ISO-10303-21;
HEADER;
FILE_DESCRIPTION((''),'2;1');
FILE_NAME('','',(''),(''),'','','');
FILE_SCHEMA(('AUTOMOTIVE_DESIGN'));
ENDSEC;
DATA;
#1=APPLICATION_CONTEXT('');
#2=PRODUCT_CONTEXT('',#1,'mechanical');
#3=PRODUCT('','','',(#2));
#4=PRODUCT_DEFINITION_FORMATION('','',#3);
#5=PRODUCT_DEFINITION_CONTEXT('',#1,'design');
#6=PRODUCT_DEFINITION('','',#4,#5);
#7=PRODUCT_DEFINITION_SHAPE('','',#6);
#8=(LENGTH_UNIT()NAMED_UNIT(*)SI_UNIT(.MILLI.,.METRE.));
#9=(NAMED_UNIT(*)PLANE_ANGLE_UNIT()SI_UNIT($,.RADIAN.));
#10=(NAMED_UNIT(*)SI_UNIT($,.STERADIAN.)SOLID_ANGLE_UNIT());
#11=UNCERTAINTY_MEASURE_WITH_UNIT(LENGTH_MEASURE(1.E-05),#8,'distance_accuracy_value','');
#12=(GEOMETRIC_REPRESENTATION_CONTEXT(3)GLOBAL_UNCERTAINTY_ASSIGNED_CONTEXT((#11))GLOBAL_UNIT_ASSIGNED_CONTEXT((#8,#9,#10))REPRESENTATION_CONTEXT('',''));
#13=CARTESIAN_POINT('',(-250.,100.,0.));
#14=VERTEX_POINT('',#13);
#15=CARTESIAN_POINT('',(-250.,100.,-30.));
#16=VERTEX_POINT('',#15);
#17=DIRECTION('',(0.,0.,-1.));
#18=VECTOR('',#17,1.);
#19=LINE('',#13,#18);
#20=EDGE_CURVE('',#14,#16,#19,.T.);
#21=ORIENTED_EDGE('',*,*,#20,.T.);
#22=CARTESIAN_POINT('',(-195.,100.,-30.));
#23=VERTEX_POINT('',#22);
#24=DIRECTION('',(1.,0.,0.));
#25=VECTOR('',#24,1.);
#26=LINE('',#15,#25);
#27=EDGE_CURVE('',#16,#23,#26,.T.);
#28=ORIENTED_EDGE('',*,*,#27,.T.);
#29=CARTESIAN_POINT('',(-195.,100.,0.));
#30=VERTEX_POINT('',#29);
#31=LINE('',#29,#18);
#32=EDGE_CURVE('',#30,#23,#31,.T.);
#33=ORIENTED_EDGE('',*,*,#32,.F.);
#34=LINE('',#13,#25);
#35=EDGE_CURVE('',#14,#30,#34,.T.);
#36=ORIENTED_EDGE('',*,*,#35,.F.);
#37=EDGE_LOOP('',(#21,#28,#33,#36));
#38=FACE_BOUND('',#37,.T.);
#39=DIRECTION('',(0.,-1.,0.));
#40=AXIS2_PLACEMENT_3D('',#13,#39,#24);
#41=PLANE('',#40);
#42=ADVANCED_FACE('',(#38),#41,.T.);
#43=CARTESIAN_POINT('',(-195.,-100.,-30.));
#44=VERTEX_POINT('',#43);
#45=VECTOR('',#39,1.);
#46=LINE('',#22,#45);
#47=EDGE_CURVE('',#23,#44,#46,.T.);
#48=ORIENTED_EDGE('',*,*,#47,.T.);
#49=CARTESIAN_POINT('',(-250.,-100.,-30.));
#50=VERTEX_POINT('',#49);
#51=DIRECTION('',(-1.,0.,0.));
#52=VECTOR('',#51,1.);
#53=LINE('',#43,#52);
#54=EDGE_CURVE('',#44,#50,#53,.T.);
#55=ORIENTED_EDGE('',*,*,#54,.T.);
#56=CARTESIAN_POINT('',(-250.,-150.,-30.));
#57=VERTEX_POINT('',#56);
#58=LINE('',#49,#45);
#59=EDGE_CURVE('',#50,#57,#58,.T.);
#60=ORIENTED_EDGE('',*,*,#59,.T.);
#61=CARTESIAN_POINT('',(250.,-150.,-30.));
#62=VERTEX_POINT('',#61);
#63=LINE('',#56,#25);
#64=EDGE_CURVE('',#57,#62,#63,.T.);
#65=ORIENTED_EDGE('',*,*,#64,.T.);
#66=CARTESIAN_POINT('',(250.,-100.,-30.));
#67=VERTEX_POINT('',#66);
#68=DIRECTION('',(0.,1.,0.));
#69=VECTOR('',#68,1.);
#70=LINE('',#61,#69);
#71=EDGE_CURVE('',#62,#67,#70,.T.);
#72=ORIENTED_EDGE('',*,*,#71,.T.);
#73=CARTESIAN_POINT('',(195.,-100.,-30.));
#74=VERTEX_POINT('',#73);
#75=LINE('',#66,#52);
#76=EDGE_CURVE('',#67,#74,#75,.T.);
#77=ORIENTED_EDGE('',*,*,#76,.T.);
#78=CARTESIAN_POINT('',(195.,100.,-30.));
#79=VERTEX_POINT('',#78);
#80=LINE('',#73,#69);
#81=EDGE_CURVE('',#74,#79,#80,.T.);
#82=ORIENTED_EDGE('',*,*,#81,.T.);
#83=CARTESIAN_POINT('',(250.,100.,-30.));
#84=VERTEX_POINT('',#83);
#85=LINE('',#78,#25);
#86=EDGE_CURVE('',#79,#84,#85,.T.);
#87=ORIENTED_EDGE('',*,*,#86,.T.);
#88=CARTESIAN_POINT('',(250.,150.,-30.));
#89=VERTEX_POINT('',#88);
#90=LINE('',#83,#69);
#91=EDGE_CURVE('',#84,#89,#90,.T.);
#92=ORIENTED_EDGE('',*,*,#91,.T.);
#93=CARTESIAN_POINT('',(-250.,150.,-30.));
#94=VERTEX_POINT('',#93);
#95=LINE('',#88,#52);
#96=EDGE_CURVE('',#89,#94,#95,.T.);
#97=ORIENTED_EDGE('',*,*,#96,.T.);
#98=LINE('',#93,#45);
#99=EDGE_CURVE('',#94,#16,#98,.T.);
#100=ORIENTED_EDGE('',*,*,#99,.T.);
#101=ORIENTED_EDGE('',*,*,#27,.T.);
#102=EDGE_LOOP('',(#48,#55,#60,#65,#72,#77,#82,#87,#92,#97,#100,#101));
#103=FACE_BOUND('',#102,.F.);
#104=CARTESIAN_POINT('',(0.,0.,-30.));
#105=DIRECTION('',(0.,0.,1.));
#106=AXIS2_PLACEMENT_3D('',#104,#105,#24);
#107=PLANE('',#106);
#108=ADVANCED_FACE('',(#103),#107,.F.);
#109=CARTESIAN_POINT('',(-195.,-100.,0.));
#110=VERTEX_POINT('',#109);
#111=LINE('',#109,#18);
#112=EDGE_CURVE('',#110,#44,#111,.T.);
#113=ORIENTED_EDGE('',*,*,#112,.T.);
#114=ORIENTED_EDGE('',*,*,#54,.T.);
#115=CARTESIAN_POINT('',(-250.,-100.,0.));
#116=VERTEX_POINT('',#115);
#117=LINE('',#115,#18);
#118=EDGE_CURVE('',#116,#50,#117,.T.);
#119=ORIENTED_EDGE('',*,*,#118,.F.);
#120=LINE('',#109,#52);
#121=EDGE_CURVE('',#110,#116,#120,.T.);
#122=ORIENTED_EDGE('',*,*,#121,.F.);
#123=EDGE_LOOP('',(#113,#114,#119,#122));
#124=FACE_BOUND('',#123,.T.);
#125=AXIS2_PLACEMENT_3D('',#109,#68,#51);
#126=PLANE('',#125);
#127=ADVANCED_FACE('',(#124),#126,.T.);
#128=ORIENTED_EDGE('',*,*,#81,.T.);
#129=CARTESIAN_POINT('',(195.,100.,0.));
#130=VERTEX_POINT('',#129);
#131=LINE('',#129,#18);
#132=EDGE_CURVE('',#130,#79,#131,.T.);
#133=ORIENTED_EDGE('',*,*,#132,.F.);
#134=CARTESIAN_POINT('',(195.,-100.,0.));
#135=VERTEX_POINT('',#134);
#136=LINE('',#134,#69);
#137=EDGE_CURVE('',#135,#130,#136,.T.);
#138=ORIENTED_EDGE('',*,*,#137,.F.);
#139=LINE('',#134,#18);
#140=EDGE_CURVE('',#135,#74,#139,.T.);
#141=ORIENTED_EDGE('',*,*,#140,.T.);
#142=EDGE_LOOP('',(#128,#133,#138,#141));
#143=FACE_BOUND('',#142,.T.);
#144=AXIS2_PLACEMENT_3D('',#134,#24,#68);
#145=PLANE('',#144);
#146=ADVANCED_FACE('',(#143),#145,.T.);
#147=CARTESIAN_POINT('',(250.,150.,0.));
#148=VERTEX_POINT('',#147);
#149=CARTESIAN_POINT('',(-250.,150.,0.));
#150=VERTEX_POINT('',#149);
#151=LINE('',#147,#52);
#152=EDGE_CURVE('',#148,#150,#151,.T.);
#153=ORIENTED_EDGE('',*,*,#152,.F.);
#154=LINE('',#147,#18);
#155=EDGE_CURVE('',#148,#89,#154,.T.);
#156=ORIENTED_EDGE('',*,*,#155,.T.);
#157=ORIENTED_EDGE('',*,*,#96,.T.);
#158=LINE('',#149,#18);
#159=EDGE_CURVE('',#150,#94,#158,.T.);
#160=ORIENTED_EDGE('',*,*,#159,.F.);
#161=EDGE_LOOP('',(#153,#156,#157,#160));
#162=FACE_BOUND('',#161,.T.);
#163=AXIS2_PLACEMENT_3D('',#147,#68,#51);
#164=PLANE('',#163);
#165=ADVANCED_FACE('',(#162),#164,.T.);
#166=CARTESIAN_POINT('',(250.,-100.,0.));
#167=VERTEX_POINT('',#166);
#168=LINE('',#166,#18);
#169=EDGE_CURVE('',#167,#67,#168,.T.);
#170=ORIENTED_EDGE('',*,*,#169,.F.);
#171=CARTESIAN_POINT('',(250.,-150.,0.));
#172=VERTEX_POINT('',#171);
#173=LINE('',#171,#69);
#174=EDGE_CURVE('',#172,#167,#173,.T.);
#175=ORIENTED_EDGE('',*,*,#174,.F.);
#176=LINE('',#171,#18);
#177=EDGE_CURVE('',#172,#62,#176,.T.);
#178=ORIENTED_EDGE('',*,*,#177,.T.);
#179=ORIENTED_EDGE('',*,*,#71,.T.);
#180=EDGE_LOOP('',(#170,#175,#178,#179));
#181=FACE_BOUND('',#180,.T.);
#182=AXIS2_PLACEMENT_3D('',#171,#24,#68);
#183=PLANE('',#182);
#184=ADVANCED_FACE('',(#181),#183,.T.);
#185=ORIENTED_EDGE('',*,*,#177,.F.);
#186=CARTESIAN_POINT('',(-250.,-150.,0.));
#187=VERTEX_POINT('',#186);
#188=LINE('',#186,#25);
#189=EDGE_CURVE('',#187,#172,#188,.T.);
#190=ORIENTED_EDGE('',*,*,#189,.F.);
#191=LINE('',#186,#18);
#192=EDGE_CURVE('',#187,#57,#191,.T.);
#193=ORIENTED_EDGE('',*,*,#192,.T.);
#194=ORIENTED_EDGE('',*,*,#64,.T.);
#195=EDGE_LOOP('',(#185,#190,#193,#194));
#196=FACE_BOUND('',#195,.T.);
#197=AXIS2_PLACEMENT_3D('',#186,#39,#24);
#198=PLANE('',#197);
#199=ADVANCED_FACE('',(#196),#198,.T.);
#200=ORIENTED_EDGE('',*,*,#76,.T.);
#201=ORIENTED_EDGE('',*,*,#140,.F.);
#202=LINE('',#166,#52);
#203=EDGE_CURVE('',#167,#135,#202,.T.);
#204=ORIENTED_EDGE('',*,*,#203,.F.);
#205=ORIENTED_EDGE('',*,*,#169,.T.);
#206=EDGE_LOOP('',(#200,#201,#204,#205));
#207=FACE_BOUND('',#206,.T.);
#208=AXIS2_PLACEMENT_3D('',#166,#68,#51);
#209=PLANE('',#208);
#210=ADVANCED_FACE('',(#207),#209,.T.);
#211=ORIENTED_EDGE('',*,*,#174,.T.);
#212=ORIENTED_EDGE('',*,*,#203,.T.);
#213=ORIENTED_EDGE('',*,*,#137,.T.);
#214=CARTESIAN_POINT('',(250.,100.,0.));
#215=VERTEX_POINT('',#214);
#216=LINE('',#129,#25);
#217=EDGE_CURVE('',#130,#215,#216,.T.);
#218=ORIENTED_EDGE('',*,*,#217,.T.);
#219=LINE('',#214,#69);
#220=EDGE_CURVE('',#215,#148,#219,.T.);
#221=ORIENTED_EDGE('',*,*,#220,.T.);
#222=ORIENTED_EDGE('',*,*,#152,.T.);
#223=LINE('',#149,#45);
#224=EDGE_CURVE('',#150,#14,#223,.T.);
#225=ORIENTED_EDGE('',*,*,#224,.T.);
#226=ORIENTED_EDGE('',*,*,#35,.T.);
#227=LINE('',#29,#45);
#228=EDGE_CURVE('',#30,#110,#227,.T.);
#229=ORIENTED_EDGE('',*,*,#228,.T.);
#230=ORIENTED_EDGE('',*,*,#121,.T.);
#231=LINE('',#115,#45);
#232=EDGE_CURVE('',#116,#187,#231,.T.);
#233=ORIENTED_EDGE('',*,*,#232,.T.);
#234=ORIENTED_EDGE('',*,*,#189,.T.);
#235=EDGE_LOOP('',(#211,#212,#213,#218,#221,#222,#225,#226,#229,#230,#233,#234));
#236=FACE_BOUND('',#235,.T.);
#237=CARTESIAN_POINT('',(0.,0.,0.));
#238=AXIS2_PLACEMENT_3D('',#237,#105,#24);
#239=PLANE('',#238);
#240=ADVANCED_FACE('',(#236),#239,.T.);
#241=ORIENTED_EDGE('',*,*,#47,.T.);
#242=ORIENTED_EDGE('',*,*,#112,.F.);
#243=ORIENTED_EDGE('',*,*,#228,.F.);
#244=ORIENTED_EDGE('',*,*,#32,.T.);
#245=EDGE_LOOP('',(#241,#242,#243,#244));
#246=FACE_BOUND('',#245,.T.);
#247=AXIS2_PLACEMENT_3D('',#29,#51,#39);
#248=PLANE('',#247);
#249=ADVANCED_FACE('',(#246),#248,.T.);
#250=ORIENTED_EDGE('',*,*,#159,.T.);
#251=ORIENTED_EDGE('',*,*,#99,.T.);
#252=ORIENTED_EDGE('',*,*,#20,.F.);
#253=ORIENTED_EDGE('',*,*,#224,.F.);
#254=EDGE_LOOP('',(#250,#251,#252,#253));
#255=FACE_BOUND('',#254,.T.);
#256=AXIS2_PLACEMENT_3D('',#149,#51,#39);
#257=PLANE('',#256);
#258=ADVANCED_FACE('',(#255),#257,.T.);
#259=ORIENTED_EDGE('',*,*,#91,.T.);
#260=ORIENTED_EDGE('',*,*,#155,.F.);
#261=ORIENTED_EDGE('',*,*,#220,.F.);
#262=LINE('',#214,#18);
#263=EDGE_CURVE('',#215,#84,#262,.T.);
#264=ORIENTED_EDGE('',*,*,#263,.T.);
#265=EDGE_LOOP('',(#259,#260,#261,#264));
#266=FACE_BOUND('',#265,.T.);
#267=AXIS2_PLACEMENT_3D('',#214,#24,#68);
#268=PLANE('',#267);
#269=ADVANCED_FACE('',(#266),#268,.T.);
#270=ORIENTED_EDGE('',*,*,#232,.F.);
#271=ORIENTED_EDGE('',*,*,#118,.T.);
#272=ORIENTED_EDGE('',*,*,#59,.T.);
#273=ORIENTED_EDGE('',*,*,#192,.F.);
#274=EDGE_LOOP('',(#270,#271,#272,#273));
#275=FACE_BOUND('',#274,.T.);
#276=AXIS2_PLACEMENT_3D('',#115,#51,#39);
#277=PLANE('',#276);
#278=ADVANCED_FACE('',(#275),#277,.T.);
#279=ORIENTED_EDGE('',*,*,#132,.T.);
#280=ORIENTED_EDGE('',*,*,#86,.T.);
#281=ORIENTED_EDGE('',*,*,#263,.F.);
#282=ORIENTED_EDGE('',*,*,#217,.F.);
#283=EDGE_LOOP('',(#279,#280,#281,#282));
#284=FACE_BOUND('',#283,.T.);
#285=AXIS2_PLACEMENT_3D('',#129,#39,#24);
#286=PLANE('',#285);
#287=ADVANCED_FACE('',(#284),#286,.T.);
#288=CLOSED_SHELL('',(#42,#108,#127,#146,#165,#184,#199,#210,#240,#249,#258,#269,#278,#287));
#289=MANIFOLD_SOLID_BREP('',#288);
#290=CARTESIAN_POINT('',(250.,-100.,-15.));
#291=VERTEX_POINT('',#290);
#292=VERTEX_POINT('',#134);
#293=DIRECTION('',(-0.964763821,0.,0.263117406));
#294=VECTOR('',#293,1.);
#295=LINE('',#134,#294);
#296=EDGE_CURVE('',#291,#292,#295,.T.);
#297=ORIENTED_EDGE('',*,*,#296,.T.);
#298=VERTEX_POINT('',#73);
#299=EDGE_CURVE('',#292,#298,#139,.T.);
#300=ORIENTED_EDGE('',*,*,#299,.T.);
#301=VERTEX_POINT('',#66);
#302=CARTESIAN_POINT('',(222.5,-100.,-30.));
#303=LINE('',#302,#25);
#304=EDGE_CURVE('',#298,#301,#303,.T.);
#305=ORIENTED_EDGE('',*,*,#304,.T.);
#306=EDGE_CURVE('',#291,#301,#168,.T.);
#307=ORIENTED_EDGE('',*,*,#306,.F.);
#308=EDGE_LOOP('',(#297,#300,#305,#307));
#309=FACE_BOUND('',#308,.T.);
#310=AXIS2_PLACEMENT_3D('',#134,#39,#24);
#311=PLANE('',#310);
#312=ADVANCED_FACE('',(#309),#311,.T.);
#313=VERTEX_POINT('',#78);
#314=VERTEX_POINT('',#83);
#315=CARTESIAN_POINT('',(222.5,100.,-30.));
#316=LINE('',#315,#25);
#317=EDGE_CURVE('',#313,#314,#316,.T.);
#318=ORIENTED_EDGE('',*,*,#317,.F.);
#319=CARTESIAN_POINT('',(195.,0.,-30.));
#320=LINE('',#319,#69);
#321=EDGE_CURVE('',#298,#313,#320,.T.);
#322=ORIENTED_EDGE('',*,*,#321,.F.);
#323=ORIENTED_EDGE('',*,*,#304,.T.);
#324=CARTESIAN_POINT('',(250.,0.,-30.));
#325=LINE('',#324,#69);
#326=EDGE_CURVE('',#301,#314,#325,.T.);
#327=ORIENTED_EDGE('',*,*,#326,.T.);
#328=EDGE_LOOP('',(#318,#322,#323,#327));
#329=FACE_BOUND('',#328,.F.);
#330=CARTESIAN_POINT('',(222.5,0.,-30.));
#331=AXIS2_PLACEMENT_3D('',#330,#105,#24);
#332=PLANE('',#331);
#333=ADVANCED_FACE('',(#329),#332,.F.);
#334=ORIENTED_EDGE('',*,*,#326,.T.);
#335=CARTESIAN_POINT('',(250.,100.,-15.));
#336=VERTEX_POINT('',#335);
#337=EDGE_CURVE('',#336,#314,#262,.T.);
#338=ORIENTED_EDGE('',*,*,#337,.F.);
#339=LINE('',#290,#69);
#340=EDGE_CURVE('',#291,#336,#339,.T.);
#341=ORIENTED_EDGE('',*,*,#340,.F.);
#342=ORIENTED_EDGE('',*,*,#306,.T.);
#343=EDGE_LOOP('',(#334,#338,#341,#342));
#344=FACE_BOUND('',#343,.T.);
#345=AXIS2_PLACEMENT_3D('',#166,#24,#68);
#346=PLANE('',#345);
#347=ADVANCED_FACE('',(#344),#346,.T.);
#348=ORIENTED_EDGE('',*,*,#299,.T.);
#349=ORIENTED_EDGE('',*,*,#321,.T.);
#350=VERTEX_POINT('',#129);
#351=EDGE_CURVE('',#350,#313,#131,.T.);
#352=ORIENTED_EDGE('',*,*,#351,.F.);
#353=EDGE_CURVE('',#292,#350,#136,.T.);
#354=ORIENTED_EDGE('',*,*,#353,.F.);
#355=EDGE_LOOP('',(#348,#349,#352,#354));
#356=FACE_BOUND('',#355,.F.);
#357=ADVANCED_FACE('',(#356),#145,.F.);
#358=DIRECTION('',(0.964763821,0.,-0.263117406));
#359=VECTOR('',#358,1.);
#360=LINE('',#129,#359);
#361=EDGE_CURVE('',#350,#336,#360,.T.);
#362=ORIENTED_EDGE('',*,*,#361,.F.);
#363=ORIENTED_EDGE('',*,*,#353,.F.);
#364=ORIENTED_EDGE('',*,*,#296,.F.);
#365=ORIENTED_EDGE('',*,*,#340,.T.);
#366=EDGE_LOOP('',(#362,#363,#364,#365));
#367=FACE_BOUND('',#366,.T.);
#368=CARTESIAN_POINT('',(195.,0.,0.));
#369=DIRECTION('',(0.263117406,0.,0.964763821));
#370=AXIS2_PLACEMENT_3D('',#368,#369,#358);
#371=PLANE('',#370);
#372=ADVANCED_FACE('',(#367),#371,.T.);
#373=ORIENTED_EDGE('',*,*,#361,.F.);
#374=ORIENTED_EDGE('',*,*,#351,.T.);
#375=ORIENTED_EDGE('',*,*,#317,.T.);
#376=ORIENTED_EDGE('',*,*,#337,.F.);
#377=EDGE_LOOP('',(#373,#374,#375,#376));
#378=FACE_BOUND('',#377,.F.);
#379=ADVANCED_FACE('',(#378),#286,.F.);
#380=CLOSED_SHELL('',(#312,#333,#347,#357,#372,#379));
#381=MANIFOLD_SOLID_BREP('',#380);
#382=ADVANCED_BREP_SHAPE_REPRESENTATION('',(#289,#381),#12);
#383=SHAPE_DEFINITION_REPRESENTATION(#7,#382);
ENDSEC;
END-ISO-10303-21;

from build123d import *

# Parameters (mm, degrees)
F2_DEPTH      = 30
F0_W          = 55
F0_H          = 200
F3_DEPTH      = 30
F4_DEPTH      = 150.001
F4_DEPTH_BACK = 150.001


# Not quite as in the source:
# - a feature of the source that left no trace in its solid (it failed there, or was rolled back) is left out


with BuildPart() as f2:
    # F0 (on Top) → F2 (new body)
    with BuildSketch(Plane.XY):
        Polygon((250, 150), (-250, 150), (-250, 100), (-195, 100), (-195, -100), (-250, -100), (-250, -150), (250, -150), (250, -100), (195, -100), (195, 100), (250, 100), align=None)
    extrude(amount=-F2_DEPTH)


with BuildPart() as f3:
    # F0 (on Top) → F3 (new body, through all)
    with BuildSketch(Plane.XY):
        with Locations((222.5, 0)):
            Rectangle(F0_W, F0_H)
    extrude(amount=-F3_DEPTH)

    # F1 (on Front) → F4 (cut, two sides)
    with BuildSketch(Plane.XZ) as f4_sk:
        Polygon((250, -15), (250, 0), (195, 0), align=None)
    extrude(amount=-F4_DEPTH, mode=Mode.SUBTRACT)
    extrude(f4_sk.sketch, amount=F4_DEPTH_BACK, mode=Mode.SUBTRACT)


solid = Compound([f2.part, f3.part])
